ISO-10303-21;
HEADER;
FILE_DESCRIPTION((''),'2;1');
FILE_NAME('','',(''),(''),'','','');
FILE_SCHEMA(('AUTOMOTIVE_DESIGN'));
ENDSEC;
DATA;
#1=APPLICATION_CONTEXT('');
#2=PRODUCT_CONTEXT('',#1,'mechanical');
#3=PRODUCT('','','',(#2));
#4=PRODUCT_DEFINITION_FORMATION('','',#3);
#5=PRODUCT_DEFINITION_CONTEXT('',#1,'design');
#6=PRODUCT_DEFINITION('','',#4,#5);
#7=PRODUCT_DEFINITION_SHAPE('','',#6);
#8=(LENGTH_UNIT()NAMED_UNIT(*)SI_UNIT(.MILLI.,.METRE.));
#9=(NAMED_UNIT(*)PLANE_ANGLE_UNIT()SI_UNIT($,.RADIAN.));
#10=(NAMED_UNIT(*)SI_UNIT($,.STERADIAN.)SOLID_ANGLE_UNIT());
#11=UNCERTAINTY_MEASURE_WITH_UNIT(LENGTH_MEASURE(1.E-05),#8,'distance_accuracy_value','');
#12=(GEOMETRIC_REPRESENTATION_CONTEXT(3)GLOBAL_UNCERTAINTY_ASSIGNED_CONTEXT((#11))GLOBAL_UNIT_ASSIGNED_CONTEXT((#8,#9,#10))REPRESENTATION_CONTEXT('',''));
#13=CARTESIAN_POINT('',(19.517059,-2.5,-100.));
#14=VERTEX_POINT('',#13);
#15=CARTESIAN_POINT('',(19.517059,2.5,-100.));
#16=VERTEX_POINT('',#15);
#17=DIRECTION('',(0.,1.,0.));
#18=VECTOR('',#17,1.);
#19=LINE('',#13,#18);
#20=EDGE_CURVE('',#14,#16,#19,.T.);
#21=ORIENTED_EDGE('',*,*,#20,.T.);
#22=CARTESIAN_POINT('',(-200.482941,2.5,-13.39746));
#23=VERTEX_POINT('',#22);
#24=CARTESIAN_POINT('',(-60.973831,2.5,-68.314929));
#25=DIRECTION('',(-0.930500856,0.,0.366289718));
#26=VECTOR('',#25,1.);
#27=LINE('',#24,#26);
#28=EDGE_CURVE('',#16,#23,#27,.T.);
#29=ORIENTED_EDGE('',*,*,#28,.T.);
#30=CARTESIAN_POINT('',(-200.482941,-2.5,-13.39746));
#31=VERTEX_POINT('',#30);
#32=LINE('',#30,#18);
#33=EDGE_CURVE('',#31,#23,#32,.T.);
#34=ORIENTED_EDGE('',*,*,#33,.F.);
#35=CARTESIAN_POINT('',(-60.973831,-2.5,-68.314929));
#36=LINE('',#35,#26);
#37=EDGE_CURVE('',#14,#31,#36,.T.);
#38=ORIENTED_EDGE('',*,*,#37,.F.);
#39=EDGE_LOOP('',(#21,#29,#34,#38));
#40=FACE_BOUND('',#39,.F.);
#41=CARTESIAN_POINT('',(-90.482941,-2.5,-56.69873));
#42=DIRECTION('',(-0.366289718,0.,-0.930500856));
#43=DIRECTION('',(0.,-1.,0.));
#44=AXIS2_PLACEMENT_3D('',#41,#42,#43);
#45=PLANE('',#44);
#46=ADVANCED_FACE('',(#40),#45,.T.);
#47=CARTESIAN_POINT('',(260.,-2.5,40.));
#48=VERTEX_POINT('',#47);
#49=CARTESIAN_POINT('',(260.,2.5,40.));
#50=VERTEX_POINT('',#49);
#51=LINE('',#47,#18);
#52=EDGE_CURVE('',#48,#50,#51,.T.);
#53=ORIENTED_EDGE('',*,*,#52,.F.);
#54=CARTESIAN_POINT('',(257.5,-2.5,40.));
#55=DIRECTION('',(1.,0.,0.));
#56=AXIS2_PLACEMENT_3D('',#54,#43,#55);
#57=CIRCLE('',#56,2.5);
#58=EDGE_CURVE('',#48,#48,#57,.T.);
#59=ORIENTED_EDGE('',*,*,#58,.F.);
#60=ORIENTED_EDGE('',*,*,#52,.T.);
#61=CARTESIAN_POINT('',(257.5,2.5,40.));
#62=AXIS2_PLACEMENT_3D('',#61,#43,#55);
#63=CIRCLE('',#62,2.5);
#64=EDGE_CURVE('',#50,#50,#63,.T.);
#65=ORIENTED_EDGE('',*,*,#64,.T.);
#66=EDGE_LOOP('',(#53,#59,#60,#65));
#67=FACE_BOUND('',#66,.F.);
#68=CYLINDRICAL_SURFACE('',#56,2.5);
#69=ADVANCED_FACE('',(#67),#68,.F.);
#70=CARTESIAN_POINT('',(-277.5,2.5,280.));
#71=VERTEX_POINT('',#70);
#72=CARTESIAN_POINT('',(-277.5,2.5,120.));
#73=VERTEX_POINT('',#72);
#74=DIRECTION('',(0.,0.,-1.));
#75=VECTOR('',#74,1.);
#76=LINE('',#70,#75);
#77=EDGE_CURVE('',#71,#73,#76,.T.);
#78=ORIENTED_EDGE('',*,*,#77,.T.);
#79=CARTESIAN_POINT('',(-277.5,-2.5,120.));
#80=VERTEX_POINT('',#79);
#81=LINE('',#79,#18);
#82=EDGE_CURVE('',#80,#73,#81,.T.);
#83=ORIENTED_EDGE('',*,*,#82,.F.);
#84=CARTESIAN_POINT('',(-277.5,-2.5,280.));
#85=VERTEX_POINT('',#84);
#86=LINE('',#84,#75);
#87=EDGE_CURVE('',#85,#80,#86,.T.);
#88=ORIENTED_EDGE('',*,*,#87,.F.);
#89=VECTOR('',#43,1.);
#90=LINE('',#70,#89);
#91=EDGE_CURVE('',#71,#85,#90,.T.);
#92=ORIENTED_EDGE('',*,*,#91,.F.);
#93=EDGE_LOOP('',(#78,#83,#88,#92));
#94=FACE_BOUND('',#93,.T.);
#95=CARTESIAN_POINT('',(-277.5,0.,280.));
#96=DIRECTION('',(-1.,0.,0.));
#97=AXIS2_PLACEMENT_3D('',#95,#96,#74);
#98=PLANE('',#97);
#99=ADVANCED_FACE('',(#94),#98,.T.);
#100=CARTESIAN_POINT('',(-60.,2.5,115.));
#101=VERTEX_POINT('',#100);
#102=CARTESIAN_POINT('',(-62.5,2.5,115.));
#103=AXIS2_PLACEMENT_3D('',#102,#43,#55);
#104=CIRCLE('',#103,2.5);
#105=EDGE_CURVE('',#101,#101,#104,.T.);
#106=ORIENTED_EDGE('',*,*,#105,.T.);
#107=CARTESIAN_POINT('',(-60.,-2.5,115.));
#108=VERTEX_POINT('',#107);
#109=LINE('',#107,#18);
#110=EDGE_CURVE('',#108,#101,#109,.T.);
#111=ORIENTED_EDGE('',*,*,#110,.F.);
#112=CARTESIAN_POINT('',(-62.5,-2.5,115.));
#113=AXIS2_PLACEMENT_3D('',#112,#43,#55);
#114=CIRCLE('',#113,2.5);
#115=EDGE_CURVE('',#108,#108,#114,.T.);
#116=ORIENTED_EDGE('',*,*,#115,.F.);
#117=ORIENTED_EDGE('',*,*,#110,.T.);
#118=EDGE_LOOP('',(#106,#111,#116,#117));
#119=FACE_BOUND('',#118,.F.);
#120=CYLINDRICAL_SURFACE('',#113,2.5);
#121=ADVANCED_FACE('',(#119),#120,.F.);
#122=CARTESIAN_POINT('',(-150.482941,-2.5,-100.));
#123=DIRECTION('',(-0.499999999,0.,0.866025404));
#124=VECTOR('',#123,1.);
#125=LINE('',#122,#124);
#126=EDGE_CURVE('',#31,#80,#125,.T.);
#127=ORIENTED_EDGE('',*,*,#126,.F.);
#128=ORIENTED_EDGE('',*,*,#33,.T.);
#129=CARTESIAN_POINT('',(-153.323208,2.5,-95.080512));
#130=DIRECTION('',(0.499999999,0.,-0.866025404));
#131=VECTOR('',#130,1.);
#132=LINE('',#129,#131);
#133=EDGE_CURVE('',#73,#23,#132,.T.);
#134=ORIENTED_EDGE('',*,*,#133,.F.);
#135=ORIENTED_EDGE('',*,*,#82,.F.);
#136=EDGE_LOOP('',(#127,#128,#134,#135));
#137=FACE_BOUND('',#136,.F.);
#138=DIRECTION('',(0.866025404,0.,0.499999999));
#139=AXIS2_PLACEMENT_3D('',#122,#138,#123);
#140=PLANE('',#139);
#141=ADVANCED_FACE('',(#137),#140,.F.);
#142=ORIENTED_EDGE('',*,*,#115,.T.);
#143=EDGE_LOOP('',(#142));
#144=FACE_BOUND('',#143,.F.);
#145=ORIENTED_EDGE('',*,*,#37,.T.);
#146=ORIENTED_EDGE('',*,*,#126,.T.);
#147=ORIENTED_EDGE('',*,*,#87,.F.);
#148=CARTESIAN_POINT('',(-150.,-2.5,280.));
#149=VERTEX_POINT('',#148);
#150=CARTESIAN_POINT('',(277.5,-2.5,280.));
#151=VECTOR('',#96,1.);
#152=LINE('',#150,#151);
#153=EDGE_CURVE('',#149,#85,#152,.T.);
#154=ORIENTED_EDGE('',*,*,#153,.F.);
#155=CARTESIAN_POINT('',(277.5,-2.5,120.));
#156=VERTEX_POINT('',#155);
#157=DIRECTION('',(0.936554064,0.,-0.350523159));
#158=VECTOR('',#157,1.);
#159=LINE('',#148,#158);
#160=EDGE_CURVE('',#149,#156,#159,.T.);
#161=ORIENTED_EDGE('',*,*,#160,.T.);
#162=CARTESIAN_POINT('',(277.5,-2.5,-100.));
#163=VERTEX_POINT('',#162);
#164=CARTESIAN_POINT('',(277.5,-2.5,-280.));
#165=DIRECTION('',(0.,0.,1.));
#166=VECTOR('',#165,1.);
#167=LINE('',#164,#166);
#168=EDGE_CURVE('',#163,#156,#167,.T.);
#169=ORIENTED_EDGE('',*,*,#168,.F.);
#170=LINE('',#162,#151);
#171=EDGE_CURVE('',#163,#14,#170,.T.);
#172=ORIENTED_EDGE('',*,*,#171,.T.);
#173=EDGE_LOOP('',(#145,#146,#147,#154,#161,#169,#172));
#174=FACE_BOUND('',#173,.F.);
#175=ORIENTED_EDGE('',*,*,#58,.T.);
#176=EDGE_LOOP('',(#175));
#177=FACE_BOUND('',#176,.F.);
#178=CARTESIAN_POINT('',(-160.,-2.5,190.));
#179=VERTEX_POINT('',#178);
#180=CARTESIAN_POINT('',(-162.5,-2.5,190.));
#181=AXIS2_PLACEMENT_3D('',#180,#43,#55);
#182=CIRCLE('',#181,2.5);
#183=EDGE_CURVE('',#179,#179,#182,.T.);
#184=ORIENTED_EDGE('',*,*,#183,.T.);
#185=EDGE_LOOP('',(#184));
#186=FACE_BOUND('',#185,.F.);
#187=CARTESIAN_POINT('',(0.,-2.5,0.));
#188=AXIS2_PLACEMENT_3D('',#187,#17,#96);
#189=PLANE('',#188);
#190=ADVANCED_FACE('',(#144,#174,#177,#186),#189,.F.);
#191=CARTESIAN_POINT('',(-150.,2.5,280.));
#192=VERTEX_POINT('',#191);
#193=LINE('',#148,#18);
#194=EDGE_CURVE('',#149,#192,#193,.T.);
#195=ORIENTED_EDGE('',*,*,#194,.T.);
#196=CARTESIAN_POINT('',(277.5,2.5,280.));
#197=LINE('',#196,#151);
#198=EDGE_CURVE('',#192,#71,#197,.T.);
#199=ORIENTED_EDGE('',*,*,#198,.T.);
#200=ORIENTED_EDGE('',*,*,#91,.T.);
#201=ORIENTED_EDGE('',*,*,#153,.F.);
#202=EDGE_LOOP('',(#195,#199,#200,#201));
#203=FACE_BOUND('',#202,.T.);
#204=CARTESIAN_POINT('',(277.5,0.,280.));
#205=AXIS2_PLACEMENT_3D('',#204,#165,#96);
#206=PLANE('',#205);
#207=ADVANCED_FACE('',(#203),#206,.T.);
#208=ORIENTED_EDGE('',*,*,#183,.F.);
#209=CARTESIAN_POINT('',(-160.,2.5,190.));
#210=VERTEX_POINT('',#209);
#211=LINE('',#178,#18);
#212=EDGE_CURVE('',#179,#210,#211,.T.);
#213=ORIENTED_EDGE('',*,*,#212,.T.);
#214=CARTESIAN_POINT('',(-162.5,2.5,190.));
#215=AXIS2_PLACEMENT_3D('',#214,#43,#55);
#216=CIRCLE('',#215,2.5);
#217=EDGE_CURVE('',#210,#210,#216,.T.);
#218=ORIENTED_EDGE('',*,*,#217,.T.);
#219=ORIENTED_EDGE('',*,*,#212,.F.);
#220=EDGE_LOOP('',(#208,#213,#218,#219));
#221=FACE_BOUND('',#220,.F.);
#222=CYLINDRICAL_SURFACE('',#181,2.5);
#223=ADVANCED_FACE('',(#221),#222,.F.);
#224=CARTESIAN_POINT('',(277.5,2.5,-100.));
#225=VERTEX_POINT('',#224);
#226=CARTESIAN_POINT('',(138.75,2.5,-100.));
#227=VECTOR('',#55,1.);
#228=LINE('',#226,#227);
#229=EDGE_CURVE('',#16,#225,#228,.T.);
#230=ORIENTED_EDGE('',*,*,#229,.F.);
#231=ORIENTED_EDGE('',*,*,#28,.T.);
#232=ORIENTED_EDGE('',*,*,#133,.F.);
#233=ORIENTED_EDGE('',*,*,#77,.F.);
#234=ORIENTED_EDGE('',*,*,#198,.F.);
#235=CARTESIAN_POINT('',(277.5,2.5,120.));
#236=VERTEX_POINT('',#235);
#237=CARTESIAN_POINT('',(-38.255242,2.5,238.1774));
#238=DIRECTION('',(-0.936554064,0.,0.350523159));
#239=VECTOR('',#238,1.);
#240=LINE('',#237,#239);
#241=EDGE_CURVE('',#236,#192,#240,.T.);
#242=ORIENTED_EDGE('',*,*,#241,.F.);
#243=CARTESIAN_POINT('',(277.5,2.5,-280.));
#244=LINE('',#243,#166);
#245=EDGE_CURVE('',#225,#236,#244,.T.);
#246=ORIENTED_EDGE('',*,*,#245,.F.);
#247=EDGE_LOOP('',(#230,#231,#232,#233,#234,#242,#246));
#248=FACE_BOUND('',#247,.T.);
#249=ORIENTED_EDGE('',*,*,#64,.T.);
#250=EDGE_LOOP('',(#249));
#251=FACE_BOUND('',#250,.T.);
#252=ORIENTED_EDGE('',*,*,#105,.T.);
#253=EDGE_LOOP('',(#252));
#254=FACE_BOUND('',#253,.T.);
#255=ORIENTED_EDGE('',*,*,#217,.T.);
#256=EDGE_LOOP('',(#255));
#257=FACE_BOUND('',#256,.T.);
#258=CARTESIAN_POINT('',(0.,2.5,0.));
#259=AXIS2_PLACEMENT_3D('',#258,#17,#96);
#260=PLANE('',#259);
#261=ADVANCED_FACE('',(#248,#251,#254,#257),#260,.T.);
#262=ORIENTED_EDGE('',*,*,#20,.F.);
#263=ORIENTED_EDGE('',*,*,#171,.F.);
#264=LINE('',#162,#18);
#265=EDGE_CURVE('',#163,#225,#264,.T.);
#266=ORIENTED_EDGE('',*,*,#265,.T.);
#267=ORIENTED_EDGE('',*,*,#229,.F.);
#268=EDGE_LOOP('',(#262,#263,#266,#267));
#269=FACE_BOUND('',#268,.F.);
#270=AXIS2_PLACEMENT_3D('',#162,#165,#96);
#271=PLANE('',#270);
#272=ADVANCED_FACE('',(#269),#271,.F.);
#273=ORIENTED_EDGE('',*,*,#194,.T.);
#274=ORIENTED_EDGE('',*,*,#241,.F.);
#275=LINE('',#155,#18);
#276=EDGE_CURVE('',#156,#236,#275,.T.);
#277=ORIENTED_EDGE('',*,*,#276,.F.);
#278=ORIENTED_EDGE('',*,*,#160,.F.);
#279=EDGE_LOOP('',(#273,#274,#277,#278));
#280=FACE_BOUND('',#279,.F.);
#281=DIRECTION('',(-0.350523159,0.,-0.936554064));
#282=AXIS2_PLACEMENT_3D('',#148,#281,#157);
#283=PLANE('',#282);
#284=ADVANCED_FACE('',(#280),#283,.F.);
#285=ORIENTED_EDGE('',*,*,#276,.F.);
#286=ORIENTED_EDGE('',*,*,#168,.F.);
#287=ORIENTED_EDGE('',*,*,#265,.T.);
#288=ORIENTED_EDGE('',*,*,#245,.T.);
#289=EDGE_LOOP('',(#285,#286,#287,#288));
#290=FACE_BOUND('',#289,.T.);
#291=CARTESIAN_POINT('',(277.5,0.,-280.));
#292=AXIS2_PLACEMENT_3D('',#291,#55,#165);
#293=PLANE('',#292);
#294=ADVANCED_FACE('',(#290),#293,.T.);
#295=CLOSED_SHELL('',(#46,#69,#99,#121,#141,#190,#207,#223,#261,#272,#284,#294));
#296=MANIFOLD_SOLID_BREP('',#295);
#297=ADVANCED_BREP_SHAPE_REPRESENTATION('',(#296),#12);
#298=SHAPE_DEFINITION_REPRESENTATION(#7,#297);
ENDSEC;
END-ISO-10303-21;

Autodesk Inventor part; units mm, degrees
ref_plane "YZ Plane" through (0, 0, 0) normal (1, 0, 0) x (0, 1, 0)
ref_plane "XZ Plane" through (0, 0, 0) normal (0, 1, 0) x (-1, 0, 0)
ref_plane "XY Plane" through (0, 0, 0) normal (0, 0, 1) x (1, 0, 0)
sketch "スケッチ1" plane through (0, 0, 0) normal (0, 1, 0) x (-1, 0, 0)
  line L0 (-277.5, 280) -> (277.5, 280)
  line L1 (277.5, 280) -> (277.5, -280)
  line L2 (277.5, -280) -> (-277.5, -280)
  line L3 (-277.5, -280) -> (-277.5, 280)
  line L4 (-277.5, 280) -> (277.5, -280) construction
  line L5 (277.5, 280) -> (-277.5, -280) construction
  point P0 (0, 0)
  dimension "d0" = 555
  dimension "d1" = 560
extrude "押し出し1" add sketch "スケッチ1" along normal mid plane 5
sketch "スケッチ3" plane through (0, -2.5, 0) normal (0, -1, 0) x (1, 0, 0)
  circle A0 centre (-62.5, 115) radius 2.5
  line L0 (277.5, -280) -> (277.5, 280) projected
  line L1 (-277.5, -280) -> (277.5, -280) projected
  circle A1 centre (-162.5, 190) radius 2.5
  circle A2 centre (257.5, 40) radius 2.5
  point P0 (0, 0)
  dimension "d10" = 5
  dimension "d15" = 5
  dimension "d16" = 320
  dimension "d17" = 20
  dimension "d18" = 5
  dimension "d24" = 75
  dimension "d25" = 320
  dimension "d26" = 420
  dimension "d27" = 150
extrude "押し出し4" cut sketch "スケッチ3" against normal through all
sketch "スケッチ5" plane through (0, -2.5, 0) normal (0, -1, 0) x (1, 0, 0)
  line L0 (277.5, 250) -> (-277.5, 250)
  line L1 (-250, 280) -> (-250, -280) construction
  line L2 (-277.5, -250) -> (277.5, -250)
  line L3 (250, -280) -> (250, 280) construction
  line L4 (-277.5, 280) -> (277.5, 280)
  line L5 (-150, 280) -> (277.5, 120)
  line L6 (277.5, 280) -> (277.5, -280)
  line L7 (-277.5, -280) -> (-277.5, 280)
  line L8 (-277.5, 120) -> (-150.482941, -100)
  line L9 (-150.482941, -100) -> (277.5, -100)
  line L10 (277.5, -280) -> (277.5, 280)
  point P0 (0, 0)
  dimension "d32" = 100
  dimension "d33" = 130
  dimension "d34" = 350
  dimension "d35" = 60
  dimension "d46" = 220
sketch "スケッチ5 outline for 押し出し5" plane through (0, -2.5, 0) normal (0, -1, 0) x (1, 0, 0)
  line L0 (277.5, 120) -> (277.5, 280)
  line L1 (-150, 280) -> (277.5, 120)
  line L2 (277.5, 280) -> (-150, 280)
  line L3 (-277.5, 120) -> (-277.5, -280)
  line L4 (-150.482941, -100) -> (-277.5, 120)
  line L5 (277.5, -100) -> (-150.482941, -100)
  line L6 (277.5, -280) -> (277.5, -100)
  line L7 (-277.5, -280) -> (277.5, -280)
extrude "押し出し5" cut sketch "スケッチ5 outline for 押し出し5" against normal through all
chamfer "面取り2" distance 170 distance2 100 1 edges at (-150.4829, 0, -100) measured on face at (134.839, -0.8333, -100)
properties part number "endplate"
